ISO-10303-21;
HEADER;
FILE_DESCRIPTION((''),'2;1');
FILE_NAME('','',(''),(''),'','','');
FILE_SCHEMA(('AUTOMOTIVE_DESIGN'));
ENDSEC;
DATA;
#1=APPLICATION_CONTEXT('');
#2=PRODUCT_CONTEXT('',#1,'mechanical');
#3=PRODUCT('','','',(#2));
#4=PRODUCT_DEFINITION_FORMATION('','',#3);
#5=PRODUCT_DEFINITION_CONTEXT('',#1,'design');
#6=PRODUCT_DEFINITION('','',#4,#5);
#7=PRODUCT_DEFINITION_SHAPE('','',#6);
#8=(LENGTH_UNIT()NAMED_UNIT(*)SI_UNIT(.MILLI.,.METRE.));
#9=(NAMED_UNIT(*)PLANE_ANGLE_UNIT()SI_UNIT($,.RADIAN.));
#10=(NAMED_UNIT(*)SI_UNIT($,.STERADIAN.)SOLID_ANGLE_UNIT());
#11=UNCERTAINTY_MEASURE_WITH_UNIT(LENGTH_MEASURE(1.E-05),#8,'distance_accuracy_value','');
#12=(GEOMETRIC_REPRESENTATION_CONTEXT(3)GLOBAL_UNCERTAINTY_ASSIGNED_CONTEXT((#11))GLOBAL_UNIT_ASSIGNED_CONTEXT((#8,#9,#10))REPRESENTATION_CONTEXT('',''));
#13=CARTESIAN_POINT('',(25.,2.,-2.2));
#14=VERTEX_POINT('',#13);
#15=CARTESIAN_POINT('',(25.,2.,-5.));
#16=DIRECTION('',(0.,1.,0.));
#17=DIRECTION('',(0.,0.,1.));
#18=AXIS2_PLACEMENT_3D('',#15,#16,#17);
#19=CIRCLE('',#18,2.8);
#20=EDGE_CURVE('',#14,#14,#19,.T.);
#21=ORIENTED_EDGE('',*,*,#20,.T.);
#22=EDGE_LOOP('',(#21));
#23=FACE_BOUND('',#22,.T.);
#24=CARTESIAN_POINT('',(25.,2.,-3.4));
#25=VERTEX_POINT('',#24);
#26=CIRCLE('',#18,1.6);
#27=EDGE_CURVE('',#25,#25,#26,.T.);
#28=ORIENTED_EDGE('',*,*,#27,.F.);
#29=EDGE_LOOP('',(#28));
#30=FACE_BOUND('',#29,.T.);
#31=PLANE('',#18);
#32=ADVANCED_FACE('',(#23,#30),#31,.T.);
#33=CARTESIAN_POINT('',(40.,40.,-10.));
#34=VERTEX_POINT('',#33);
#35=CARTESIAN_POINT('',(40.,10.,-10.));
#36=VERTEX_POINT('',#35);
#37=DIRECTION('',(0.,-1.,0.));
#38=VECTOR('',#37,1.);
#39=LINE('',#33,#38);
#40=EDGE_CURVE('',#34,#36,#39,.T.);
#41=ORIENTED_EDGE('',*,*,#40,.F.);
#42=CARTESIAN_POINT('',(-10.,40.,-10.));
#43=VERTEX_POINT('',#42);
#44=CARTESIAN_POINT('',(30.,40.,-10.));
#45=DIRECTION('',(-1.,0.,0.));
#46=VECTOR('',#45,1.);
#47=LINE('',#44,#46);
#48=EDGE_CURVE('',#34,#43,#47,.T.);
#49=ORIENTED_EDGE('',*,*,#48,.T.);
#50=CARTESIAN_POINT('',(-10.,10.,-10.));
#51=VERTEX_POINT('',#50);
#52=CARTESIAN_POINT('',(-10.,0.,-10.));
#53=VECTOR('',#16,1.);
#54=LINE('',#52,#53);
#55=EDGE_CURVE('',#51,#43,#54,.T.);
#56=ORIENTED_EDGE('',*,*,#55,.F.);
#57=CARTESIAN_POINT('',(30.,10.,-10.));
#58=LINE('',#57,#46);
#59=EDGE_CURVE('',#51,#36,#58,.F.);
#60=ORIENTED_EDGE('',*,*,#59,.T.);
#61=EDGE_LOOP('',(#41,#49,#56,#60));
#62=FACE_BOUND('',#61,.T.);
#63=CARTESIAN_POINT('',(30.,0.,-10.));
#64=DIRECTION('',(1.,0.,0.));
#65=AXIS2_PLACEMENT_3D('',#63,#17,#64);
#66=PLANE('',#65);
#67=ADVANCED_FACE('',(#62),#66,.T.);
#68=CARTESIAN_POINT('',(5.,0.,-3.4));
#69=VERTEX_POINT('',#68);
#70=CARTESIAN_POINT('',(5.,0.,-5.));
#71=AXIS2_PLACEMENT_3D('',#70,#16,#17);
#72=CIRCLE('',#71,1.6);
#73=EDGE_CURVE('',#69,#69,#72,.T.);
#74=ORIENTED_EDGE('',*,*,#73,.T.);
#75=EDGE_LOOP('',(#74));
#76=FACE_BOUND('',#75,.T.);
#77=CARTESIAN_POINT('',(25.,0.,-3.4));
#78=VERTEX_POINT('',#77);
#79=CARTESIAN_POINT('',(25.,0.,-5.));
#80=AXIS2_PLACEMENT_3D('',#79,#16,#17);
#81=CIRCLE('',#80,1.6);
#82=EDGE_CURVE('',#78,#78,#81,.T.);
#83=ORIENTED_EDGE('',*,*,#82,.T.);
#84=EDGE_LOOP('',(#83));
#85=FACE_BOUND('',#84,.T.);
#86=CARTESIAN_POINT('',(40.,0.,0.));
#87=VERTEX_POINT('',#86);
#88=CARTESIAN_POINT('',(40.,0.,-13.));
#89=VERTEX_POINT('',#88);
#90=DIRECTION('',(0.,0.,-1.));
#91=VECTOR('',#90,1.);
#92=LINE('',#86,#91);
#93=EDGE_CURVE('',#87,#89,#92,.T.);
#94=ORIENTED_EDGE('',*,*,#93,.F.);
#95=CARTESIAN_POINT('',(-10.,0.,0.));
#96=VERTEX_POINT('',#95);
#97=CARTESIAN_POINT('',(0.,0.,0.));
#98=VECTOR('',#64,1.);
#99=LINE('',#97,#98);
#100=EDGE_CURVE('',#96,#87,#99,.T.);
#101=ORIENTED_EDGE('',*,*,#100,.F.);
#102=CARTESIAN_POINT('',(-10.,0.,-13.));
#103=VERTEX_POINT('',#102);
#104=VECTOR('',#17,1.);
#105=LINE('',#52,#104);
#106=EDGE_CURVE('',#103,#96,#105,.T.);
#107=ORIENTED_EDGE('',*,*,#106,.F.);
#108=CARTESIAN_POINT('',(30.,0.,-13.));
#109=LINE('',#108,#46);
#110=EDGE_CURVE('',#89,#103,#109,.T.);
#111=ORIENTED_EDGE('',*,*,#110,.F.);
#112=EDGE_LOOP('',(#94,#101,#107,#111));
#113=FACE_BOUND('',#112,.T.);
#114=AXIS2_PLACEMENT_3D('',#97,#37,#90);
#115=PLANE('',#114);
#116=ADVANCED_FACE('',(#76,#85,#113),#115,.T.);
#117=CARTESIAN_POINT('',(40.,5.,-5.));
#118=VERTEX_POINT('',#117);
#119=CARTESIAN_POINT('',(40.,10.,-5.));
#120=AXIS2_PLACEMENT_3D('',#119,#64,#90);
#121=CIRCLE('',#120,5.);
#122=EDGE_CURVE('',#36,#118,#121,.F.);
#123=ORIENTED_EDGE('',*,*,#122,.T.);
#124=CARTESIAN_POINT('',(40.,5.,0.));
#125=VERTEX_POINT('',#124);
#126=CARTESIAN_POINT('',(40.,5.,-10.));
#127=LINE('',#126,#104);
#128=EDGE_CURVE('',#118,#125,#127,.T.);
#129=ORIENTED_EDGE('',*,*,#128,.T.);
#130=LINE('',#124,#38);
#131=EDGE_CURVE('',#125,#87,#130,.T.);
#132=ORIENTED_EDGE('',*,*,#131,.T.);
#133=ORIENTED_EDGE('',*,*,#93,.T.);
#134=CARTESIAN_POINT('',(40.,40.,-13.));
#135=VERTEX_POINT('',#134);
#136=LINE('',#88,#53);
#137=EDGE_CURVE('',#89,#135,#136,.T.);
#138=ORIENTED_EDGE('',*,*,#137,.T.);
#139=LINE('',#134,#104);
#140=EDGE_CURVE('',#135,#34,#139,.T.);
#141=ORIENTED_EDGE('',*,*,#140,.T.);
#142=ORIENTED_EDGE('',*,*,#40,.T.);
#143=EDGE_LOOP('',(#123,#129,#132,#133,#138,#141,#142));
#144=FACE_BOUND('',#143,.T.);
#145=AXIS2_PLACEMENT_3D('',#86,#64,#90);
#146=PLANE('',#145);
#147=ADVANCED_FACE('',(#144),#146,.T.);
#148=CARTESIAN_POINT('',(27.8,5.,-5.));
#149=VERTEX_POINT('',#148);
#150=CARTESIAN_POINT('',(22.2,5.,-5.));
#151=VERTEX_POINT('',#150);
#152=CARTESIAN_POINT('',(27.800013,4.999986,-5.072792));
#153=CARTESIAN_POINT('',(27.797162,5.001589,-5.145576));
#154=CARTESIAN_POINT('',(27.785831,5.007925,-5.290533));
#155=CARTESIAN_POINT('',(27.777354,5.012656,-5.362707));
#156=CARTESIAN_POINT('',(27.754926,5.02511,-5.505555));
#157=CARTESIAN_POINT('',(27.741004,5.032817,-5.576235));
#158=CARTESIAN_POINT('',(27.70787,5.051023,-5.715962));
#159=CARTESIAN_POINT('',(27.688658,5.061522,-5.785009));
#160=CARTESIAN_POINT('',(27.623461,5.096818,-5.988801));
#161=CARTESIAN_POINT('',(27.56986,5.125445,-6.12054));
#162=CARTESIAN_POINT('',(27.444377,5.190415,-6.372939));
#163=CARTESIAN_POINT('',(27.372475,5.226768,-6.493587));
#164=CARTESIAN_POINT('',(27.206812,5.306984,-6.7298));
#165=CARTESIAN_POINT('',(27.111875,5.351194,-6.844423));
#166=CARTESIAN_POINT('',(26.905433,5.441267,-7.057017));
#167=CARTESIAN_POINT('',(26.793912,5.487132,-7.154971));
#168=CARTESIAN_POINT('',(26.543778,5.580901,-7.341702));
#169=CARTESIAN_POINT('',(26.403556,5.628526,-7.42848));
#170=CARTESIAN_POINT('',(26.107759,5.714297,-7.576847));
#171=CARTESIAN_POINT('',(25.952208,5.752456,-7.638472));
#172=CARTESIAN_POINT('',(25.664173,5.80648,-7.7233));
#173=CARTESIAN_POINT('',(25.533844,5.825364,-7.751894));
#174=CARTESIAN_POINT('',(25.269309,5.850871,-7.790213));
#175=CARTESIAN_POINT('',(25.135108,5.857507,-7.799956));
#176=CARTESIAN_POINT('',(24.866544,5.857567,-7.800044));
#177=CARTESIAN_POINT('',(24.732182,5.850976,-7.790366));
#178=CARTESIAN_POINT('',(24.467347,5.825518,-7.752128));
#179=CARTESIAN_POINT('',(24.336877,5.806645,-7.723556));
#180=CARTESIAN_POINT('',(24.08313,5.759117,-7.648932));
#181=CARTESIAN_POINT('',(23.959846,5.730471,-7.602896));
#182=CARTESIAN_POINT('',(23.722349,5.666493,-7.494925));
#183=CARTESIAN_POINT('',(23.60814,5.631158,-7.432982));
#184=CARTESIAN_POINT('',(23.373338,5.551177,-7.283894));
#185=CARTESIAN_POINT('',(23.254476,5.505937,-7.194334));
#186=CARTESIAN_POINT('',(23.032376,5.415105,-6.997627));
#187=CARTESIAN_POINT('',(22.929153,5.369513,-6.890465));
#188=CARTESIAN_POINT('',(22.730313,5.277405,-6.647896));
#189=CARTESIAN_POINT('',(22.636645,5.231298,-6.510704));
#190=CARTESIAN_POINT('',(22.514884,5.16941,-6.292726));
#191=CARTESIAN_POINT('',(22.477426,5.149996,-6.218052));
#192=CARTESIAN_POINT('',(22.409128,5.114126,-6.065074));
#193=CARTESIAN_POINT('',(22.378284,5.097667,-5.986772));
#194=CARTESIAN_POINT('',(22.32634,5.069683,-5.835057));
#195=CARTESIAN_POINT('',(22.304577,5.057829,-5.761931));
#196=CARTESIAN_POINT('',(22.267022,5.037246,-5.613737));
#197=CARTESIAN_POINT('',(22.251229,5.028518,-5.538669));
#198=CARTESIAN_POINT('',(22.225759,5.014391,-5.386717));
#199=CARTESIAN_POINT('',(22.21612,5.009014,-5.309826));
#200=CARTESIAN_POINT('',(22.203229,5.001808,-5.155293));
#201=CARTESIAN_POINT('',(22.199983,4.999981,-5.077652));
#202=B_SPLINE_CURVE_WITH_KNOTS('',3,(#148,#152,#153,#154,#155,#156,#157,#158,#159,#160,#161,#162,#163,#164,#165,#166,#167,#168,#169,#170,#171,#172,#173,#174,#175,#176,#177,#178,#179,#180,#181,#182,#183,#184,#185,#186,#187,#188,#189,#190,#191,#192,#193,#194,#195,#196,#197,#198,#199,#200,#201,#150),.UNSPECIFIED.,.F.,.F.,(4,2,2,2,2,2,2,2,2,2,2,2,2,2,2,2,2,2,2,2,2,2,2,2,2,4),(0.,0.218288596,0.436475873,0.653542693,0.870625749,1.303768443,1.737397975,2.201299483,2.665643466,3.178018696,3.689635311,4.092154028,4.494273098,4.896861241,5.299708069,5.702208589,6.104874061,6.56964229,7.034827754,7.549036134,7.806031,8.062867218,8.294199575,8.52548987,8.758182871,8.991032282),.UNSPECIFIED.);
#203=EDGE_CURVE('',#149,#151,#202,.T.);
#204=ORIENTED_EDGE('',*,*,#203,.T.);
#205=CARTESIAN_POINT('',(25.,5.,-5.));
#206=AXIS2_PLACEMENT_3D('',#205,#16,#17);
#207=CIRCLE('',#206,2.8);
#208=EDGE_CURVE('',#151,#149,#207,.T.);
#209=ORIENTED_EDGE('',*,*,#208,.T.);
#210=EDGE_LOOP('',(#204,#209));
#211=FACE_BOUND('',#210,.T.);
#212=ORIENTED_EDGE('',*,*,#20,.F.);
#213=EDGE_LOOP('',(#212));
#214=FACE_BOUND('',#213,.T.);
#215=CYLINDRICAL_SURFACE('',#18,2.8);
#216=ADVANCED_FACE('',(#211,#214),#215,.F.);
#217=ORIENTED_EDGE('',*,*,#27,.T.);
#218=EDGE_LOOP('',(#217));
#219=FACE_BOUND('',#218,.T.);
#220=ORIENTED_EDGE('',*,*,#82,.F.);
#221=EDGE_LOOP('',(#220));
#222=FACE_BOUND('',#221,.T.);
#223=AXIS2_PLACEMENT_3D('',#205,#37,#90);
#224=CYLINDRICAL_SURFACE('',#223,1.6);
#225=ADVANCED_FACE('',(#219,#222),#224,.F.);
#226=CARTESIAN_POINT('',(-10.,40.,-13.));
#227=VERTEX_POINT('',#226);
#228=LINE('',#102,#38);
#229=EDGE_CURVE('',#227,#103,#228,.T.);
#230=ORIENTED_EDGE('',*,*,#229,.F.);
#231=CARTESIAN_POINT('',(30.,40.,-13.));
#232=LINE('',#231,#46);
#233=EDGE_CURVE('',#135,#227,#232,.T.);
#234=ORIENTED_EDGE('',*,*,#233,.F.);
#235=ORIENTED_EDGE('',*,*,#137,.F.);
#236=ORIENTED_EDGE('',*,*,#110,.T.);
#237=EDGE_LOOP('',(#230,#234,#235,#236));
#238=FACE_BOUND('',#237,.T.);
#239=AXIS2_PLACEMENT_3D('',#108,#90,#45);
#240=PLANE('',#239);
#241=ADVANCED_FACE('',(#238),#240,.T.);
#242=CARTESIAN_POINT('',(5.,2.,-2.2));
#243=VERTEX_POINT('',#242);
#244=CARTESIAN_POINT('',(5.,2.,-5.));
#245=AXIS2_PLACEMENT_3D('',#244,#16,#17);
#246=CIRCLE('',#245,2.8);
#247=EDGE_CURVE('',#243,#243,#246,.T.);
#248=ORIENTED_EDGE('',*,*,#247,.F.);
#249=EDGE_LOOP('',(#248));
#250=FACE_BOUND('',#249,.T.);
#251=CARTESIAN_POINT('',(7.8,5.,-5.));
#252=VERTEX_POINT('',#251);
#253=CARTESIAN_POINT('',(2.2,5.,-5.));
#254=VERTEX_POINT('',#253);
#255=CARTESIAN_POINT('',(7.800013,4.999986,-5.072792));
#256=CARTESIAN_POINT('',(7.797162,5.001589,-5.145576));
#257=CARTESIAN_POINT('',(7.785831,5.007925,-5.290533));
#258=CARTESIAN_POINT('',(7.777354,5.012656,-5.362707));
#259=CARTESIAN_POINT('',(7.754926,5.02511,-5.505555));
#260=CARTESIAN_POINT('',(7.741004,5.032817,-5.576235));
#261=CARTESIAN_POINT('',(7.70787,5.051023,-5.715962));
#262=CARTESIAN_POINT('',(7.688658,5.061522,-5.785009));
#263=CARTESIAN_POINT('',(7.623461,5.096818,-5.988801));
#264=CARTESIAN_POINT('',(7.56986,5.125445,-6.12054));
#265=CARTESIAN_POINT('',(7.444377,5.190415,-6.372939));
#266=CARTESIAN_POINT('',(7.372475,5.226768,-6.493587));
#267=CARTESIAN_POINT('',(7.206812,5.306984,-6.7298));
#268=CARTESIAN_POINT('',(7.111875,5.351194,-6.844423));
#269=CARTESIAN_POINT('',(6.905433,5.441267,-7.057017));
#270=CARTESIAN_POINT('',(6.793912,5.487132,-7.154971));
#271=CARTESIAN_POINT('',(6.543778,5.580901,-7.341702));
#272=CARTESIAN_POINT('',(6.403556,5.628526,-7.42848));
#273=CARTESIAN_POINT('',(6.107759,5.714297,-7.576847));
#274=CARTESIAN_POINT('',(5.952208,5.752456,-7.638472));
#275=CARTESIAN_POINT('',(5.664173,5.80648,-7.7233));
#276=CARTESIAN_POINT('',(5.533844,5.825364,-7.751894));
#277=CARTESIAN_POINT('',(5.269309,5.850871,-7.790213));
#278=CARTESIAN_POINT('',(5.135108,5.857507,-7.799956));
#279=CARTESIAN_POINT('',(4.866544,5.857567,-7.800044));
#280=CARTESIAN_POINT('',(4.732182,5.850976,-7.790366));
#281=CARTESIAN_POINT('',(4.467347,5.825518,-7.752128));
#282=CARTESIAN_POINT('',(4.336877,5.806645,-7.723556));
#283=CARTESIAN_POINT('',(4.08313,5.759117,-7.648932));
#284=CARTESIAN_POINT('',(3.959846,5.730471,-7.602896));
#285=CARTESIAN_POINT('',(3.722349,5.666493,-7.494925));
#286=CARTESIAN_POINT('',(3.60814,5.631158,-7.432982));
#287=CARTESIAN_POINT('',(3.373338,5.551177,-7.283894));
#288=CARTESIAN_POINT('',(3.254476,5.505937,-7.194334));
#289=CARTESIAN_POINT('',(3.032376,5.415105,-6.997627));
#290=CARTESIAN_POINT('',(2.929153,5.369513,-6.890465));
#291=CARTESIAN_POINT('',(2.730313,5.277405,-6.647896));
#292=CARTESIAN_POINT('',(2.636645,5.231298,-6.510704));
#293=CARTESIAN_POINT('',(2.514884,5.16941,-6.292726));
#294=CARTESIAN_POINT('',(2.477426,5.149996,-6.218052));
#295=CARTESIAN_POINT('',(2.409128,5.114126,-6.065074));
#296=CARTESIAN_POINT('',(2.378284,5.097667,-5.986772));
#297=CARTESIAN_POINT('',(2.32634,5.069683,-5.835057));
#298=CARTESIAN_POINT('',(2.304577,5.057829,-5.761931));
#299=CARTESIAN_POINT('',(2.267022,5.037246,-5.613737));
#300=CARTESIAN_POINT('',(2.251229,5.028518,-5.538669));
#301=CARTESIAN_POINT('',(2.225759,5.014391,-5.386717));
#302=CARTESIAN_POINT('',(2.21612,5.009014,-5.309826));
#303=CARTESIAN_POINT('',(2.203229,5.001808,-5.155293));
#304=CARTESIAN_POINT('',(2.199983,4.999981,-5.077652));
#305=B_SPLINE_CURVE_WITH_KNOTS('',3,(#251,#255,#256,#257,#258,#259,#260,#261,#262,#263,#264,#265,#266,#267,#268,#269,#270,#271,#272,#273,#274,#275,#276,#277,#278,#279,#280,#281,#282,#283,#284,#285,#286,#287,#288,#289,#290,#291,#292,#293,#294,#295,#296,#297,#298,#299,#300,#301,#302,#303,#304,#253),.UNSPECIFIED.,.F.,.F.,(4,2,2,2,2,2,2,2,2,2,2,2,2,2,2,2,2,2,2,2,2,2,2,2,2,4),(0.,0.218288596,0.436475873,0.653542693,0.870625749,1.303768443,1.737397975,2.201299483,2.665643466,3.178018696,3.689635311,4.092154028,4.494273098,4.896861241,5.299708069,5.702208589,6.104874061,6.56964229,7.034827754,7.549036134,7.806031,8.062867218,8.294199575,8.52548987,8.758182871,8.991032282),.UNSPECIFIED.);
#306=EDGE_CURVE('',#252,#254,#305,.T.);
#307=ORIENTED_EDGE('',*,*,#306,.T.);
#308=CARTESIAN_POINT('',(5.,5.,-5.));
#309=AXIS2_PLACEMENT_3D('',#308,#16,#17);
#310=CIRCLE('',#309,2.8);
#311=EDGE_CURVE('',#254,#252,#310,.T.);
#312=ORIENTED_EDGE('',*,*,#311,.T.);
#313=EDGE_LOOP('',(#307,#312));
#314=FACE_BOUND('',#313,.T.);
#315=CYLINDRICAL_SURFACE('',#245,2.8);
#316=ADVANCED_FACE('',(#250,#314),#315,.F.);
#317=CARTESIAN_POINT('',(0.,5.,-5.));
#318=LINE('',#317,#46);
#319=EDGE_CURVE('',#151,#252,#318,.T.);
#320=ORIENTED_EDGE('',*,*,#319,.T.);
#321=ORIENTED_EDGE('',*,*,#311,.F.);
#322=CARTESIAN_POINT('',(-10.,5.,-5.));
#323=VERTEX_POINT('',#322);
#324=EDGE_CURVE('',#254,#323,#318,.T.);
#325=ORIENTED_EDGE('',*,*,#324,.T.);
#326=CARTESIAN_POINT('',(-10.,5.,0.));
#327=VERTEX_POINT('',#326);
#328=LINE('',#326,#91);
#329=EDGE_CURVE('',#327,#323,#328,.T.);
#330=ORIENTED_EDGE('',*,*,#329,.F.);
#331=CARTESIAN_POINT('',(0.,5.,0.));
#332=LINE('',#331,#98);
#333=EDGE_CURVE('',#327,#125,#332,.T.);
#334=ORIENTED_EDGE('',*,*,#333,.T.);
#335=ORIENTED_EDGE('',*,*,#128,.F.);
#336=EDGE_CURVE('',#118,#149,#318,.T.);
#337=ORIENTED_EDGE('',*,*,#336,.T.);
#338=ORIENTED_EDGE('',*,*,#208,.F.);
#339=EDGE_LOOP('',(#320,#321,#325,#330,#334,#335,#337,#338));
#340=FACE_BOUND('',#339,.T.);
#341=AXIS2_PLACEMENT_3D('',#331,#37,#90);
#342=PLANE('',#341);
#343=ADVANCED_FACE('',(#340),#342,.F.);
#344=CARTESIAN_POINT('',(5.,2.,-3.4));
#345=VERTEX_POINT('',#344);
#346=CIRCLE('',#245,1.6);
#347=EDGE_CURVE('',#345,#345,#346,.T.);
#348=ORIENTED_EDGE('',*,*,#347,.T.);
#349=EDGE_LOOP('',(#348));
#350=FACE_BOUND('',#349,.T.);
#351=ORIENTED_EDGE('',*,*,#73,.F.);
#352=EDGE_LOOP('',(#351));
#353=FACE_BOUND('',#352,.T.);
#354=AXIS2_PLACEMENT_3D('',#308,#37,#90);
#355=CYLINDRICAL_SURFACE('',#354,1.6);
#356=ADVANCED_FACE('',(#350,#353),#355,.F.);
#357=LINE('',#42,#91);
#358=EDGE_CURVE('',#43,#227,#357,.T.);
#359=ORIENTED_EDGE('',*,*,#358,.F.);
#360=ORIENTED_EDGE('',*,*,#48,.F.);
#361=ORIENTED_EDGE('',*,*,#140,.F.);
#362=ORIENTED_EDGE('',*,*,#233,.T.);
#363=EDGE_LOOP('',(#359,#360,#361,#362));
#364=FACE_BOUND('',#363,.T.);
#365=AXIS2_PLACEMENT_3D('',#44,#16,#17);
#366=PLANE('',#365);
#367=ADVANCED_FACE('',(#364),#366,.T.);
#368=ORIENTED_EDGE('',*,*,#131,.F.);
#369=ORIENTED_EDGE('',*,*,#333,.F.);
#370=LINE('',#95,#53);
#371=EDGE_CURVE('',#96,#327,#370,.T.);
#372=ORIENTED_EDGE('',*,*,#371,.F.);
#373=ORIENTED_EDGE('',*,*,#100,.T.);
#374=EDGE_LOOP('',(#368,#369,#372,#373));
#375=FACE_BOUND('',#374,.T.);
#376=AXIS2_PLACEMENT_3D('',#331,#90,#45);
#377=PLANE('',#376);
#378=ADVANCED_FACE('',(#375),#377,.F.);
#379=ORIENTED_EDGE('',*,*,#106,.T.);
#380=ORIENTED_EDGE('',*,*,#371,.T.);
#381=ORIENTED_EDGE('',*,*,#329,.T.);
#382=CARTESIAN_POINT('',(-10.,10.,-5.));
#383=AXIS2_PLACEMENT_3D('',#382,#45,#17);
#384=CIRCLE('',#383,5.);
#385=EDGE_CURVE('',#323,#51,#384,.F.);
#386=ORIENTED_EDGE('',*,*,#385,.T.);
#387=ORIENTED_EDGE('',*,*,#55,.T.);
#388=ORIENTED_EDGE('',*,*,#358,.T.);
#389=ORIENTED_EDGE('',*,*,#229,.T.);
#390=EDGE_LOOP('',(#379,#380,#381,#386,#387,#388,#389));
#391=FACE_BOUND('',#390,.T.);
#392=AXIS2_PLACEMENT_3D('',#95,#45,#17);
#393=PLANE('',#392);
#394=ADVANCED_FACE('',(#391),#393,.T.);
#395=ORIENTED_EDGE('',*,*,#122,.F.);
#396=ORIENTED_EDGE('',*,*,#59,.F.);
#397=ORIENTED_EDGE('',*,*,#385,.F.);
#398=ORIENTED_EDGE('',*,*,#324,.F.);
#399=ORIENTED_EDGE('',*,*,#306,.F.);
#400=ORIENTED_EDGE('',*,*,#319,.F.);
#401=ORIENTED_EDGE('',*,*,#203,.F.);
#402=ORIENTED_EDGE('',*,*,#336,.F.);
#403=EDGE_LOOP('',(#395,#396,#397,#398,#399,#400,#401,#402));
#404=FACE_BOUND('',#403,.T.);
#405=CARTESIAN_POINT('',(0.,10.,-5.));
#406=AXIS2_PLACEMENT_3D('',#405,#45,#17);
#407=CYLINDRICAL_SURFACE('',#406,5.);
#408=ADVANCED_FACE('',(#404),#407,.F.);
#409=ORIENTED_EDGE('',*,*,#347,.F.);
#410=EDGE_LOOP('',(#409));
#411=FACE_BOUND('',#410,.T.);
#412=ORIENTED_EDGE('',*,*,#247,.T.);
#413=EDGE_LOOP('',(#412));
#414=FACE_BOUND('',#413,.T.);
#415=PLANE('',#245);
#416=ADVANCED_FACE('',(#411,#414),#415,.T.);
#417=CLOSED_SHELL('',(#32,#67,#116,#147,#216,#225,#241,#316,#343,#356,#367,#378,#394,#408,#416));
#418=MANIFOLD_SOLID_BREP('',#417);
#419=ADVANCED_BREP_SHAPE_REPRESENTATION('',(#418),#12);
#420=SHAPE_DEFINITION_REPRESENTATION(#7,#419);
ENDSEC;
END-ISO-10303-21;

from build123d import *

# Parameters (mm, degrees)
CROQUIS1_W                   = 30
CROQUIS1_H                   = 10
CROQUIS1_R                   = 1.6
SALIENTE_EXTRUIR1_DEPTH      = 5
CROQUIS2_R                   = 2.8
CORTAR_EXTRUIR1_DEPTH        = 3
SALIENTE_EXTRUIR2_DEPTH      = 10
SALIENTE_EXTRUIR2_DEPTH_BACK = 30
CROQUIS3_W                   = 3
CROQUIS3_H                   = 40
CROQUIS4_W                   = 10
CROQUIS4_H                   = 5
SALIENTE_EXTRUIR3_DEPTH      = 10
SALIENTE_EXTRUIR4_DEPTH      = 10
REDONDEO1_R                  = 5


with BuildPart() as part:
    # Croquis1 → Saliente-Extruir1 (new body)
    with BuildSketch(Plane(origin=(0, 0, 0), x_dir=(1, 0, 0), z_dir=(0, 1, 0))):
        with Locations((15, 5)):
            Rectangle(CROQUIS1_W, CROQUIS1_H)
        with Locations(Location((5, 5, 0), (0, 0, 270))):
            Circle(CROQUIS1_R, mode=Mode.SUBTRACT)
        with Locations(Location((25, 5, 0), (0, 0, 270))):
            Circle(CROQUIS1_R, mode=Mode.SUBTRACT)
    extrude(amount=SALIENTE_EXTRUIR1_DEPTH)

    # Croquis2 → Cortar-Extruir1 (cut)
    with BuildSketch(Plane(origin=(0, 5, 0), x_dir=(1, 0, 0), z_dir=(0, 1, 0))):
        with Locations(Location((5, 5, 0), (0, 0, 270))):
            Circle(CROQUIS2_R)
        with Locations(Location((25, 5, 0), (0, 0, 270))):
            Circle(CROQUIS2_R)
    extrude(amount=-CORTAR_EXTRUIR1_DEPTH, mode=Mode.SUBTRACT)

    # Croquis3 → Saliente-Extruir2 (add, two sides: drawn at the far end of the back side and taken through both)
    with BuildSketch(Plane.ZY.offset(-SALIENTE_EXTRUIR2_DEPTH_BACK)):
        with Locations((-11.5, 20)):
            Rectangle(CROQUIS3_W, CROQUIS3_H)
    extrude(amount=SALIENTE_EXTRUIR2_DEPTH + SALIENTE_EXTRUIR2_DEPTH_BACK)

    # Croquis4 → Saliente-Extruir3 (add)
    with BuildSketch(Plane.ZY):
        with Locations((-5, 2.5)):
            Rectangle(CROQUIS4_W, CROQUIS4_H)
    extrude(amount=SALIENTE_EXTRUIR3_DEPTH)

    # Croquis5 → Saliente-Extruir4 (add)
    with BuildSketch(Plane(origin=(30, 0, 0), x_dir=(0, 0, -1), z_dir=(1, 0, 0))):
        Polygon((0, 0), (13, 0), (13, 40), (10, 40), (10, 5), (0, 5), align=None)
    extrude(amount=SALIENTE_EXTRUIR4_DEPTH)

    # Redondeo1
    # the kernel refuses this fillet: 5 mm, written as the material it adds along each edge
    with BuildSketch(Plane(origin=(40, 5, -10), x_dir=(0, 1, 0), z_dir=(-1, 0, 0))) as redondeo1_piece_1_section:
        with BuildLine():
            CenterArc((REDONDEO1_R, -REDONDEO1_R), REDONDEO1_R, 90, 90)
            Line((0, -REDONDEO1_R), (0, 0))
            Line((0, 0), (REDONDEO1_R, 0))
        make_face()
    redondeo1_piece_1 = extrude(amount=50, mode=Mode.PRIVATE)
    redondeo1_piece_1 = redondeo1_piece_1 - Plane(origin=(5, 6.156265405, -5), x_dir=(0, 0, 1), z_dir=(0, 1, 0)) * Cylinder(2.8, 120, mode=Mode.PRIVATE)
    redondeo1_piece_1 = redondeo1_piece_1 - Plane(origin=(25, 6.156265405, -5), x_dir=(0, 0, 1), z_dir=(0, 1, 0)) * Cylinder(2.8, 120, mode=Mode.PRIVATE)
    add(redondeo1_piece_1)


solid = part.part
